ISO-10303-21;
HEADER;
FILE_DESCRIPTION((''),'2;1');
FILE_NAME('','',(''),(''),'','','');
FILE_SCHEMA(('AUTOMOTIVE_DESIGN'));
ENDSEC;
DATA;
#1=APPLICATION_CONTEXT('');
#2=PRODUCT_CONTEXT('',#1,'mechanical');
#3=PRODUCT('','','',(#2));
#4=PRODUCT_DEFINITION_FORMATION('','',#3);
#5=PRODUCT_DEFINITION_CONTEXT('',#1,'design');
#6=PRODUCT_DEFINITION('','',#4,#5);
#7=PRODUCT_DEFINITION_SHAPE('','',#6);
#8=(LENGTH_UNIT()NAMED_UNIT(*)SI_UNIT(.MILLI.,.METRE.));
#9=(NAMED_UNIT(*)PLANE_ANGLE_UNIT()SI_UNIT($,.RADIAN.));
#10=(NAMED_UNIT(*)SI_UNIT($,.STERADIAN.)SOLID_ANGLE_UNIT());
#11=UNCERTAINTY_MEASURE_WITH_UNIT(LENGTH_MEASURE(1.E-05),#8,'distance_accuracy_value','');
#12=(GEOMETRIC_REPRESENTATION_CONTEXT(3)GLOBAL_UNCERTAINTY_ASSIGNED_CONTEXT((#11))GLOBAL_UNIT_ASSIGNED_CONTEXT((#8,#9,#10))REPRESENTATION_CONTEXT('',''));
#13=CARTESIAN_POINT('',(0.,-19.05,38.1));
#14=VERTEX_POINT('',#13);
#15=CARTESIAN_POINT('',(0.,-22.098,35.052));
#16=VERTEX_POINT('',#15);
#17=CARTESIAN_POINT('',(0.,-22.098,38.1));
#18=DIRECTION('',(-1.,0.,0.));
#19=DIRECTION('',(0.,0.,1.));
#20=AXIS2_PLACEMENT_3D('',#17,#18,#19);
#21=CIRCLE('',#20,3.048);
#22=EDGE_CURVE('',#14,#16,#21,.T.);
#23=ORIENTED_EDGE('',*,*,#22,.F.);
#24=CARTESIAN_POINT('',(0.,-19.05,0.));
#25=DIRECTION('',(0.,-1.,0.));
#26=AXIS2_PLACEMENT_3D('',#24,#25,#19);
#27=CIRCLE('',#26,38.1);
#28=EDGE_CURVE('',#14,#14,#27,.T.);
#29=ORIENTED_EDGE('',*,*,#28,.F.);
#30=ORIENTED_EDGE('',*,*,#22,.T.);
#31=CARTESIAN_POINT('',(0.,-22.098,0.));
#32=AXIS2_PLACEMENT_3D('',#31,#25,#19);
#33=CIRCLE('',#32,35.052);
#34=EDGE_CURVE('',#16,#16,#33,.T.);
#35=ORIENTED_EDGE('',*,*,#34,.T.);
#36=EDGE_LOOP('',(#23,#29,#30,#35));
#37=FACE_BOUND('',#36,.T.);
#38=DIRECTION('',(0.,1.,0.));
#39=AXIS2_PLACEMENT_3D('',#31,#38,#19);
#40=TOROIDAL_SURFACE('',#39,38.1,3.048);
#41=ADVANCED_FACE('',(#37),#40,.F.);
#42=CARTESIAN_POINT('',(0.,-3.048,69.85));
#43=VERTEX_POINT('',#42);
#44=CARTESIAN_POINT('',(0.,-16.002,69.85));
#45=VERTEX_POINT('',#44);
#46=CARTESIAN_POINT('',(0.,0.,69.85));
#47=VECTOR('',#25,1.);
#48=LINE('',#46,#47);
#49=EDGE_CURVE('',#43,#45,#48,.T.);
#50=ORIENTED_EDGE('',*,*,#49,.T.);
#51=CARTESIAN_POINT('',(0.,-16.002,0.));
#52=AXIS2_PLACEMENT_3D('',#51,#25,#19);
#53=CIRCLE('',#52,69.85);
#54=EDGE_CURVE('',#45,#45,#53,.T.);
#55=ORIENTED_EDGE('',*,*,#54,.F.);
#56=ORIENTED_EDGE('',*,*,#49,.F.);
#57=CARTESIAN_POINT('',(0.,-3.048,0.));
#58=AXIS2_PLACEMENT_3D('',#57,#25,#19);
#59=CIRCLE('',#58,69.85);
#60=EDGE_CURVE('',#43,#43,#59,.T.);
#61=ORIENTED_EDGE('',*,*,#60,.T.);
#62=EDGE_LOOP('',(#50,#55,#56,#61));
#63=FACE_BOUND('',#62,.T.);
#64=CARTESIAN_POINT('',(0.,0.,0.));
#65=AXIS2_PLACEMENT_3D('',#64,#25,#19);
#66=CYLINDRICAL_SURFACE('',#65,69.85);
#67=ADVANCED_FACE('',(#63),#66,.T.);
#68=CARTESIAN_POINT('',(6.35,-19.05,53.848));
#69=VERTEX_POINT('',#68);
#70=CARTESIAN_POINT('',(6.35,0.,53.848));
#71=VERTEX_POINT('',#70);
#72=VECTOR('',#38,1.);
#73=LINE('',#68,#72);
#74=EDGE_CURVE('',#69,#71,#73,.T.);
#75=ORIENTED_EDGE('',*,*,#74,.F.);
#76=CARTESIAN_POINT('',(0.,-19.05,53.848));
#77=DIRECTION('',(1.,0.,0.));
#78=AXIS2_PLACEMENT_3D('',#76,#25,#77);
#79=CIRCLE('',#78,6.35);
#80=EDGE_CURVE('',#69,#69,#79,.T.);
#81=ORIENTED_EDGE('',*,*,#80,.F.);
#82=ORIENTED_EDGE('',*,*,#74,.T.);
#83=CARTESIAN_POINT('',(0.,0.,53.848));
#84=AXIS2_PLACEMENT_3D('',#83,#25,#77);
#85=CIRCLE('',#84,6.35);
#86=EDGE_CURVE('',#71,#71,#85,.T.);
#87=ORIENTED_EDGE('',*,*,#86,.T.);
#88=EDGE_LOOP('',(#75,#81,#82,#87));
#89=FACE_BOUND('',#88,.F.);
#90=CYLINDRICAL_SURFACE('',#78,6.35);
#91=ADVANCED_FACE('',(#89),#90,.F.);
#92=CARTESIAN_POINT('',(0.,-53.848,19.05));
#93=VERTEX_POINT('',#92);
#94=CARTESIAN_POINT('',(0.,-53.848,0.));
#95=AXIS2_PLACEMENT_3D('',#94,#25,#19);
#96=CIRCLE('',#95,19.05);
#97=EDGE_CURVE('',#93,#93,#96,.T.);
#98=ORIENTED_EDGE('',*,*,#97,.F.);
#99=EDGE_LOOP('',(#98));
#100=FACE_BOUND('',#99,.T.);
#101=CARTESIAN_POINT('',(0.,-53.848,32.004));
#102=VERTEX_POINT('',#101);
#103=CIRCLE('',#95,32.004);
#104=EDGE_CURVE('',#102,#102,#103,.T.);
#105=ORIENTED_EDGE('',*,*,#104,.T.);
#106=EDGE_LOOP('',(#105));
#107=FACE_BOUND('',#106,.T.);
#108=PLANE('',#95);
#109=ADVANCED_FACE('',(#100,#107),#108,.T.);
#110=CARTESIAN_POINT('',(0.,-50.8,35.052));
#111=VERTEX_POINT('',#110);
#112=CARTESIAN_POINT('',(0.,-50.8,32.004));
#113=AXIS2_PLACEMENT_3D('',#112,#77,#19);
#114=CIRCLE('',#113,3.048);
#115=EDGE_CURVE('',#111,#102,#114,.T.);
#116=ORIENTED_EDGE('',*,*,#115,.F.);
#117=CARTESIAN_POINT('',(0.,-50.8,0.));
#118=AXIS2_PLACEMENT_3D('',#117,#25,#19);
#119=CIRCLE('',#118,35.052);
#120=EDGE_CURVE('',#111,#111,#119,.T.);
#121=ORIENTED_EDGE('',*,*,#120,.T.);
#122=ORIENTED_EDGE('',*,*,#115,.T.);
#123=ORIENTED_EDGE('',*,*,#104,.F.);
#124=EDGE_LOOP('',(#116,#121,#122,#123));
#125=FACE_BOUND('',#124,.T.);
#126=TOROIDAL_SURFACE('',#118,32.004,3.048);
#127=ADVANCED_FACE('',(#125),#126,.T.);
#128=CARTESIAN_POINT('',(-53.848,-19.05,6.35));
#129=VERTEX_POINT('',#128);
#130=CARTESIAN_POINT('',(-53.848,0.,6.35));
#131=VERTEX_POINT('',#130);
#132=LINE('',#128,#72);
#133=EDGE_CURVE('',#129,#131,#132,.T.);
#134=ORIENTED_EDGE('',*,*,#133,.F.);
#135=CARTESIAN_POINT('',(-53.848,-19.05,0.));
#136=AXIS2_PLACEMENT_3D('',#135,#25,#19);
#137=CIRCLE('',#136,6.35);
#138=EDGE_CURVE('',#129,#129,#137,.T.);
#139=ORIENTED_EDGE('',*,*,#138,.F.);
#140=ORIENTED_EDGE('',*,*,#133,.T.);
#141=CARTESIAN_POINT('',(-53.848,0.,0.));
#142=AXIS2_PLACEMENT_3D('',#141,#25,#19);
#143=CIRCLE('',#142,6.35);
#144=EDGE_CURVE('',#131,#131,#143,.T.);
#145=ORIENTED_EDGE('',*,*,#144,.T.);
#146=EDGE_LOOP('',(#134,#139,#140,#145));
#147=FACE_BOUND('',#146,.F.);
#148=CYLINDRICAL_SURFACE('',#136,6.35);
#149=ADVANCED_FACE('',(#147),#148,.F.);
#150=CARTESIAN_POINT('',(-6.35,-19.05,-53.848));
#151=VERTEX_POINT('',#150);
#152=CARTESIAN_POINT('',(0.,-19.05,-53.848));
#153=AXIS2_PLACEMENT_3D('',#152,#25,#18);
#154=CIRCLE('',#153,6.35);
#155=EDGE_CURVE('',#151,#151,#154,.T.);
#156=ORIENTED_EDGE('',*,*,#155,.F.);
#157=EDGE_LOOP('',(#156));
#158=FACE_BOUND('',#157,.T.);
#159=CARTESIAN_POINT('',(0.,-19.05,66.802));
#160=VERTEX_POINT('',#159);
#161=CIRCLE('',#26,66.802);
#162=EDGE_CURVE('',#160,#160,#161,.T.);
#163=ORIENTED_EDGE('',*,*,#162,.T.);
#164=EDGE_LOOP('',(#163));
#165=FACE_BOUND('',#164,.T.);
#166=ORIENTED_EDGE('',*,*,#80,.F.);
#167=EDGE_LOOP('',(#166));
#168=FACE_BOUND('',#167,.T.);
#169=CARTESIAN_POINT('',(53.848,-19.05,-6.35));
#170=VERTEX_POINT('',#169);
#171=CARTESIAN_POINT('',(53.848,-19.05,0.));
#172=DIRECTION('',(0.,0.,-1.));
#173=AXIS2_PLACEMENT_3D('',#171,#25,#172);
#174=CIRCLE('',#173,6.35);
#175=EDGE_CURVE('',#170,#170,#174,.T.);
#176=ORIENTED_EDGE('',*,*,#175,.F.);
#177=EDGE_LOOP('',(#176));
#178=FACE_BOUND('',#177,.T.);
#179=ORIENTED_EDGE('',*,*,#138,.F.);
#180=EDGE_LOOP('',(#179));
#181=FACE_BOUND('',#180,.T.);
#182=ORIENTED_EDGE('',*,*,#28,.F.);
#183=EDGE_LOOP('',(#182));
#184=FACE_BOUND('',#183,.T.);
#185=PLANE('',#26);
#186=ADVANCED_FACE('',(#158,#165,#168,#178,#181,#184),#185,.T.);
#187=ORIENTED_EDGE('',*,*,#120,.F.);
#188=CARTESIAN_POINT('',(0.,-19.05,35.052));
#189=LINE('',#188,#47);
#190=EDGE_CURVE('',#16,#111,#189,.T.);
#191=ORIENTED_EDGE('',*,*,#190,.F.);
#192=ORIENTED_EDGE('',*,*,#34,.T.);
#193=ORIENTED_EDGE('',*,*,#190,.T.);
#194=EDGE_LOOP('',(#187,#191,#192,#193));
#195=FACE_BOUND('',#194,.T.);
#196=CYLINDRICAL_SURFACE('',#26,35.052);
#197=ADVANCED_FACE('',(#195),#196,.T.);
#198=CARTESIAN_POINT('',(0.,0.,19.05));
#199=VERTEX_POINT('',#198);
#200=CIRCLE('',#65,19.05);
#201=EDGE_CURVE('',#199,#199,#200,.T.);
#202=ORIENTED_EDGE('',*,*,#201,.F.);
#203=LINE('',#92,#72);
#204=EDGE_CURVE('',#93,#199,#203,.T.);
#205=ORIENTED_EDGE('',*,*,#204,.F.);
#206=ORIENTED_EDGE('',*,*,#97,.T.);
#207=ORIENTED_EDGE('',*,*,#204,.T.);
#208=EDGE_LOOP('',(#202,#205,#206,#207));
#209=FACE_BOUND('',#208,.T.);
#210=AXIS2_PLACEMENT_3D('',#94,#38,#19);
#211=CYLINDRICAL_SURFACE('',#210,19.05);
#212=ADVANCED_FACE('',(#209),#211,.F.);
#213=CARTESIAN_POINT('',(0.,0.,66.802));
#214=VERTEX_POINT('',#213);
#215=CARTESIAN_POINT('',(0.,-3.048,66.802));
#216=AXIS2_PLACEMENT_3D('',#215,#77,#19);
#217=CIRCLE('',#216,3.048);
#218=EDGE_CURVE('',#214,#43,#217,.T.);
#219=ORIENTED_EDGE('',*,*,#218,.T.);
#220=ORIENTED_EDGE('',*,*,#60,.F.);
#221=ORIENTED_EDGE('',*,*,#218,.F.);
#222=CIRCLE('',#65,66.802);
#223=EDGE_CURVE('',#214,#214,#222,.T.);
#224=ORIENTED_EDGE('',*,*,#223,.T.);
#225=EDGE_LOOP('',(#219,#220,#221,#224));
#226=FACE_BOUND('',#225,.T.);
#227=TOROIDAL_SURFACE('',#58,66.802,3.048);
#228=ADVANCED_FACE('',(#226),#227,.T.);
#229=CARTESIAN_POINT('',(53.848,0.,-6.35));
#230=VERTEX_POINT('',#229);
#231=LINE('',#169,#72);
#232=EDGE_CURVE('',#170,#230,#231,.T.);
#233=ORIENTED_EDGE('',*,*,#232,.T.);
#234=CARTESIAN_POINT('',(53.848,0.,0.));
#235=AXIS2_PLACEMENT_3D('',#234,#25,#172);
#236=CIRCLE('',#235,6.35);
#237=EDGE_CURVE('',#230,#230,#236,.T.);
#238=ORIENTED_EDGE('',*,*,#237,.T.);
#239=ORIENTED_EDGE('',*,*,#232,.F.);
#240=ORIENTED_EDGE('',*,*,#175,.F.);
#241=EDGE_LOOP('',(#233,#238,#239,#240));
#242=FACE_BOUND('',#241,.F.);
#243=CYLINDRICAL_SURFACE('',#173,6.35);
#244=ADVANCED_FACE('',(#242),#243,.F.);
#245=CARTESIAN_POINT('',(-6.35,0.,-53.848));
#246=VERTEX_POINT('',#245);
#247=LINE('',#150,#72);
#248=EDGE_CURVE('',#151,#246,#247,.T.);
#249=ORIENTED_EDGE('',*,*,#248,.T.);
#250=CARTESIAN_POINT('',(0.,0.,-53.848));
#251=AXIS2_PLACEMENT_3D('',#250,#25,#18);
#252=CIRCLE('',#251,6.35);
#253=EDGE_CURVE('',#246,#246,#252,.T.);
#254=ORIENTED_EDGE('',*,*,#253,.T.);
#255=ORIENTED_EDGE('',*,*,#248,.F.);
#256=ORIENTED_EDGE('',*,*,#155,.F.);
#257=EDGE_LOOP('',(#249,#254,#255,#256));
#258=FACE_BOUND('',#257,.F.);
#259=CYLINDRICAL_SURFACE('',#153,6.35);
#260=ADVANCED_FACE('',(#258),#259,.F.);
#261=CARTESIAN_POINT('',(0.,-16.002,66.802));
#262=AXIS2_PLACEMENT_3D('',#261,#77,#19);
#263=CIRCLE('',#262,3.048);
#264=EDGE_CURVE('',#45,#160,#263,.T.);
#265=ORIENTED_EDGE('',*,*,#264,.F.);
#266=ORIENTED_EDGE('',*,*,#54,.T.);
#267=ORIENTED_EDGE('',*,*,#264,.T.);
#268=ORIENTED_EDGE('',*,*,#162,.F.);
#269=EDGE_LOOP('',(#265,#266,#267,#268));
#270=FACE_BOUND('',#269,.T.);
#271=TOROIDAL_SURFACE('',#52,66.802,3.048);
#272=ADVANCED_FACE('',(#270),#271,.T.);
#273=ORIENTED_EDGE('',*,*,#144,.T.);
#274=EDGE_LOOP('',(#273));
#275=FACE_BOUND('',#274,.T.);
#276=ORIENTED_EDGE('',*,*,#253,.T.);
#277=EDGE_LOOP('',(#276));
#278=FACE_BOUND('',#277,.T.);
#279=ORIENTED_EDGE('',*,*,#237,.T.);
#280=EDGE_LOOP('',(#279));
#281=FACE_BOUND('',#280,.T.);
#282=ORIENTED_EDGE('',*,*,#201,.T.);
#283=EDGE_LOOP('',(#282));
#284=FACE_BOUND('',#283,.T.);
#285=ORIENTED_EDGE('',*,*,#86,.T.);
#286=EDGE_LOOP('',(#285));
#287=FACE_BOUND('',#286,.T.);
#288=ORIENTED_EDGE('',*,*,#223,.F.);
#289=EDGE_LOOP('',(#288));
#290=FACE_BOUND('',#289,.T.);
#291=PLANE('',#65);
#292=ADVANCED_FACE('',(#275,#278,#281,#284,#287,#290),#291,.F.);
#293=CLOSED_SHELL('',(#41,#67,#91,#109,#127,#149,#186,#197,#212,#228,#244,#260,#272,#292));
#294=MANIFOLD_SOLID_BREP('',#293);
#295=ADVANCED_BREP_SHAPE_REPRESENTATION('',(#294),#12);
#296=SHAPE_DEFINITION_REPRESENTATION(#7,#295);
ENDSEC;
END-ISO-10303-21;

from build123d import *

# Parameters (mm, degrees)
F2_R            = 3.048
F3_R            = 6.35
F4_DEPTH        = 19.051
F4_COPIES_COUNT = 4


# Not quite as in the source:
# - a pattern or mirror of a feature is missing from the dataset's text; its kind, count and spacing are read off the source's solid


with BuildPart() as f1:
    # F0 (on Right) → F1 (revolve)
    with BuildSketch(Plane.YZ):
        Polygon((-53.848, 19.05), (0, 19.05), (0, 69.85), (-19.05, 69.85), (-19.05, 35.052), (-53.848, 35.052), align=None)
    revolve(axis=Axis((0, -30.1634762436, 0), (0, -1, 0)))

    # F2
    f2_edges = [f1.edges().sort_by_distance(p)[0] for p in [
        (0, -53.848, -35.052),
        (0, -19.05, -35.052),
        (0, -19.05, -69.85),
        (0, 0, -69.85),
    ]]
    fillet(f2_edges, radius=F2_R)

    # F3 (on face) → F4 (cut, through all)
    with BuildSketch(Plane.XZ.offset(19.05)):
        with Locations((0, 53.848)):
            Circle(F3_R)
    f4 = extrude(amount=-F4_DEPTH, mode=Mode.SUBTRACT)

    # F4_copies: F4 ×4 about axis
    f4_copies_axis = Axis((0, 0, 0), (0, 1, 0))
    for i in range(1, F4_COPIES_COUNT):
        add(f4.rotate(f4_copies_axis, i * 360 / F4_COPIES_COUNT), mode=Mode.SUBTRACT)


solid = f1.part
